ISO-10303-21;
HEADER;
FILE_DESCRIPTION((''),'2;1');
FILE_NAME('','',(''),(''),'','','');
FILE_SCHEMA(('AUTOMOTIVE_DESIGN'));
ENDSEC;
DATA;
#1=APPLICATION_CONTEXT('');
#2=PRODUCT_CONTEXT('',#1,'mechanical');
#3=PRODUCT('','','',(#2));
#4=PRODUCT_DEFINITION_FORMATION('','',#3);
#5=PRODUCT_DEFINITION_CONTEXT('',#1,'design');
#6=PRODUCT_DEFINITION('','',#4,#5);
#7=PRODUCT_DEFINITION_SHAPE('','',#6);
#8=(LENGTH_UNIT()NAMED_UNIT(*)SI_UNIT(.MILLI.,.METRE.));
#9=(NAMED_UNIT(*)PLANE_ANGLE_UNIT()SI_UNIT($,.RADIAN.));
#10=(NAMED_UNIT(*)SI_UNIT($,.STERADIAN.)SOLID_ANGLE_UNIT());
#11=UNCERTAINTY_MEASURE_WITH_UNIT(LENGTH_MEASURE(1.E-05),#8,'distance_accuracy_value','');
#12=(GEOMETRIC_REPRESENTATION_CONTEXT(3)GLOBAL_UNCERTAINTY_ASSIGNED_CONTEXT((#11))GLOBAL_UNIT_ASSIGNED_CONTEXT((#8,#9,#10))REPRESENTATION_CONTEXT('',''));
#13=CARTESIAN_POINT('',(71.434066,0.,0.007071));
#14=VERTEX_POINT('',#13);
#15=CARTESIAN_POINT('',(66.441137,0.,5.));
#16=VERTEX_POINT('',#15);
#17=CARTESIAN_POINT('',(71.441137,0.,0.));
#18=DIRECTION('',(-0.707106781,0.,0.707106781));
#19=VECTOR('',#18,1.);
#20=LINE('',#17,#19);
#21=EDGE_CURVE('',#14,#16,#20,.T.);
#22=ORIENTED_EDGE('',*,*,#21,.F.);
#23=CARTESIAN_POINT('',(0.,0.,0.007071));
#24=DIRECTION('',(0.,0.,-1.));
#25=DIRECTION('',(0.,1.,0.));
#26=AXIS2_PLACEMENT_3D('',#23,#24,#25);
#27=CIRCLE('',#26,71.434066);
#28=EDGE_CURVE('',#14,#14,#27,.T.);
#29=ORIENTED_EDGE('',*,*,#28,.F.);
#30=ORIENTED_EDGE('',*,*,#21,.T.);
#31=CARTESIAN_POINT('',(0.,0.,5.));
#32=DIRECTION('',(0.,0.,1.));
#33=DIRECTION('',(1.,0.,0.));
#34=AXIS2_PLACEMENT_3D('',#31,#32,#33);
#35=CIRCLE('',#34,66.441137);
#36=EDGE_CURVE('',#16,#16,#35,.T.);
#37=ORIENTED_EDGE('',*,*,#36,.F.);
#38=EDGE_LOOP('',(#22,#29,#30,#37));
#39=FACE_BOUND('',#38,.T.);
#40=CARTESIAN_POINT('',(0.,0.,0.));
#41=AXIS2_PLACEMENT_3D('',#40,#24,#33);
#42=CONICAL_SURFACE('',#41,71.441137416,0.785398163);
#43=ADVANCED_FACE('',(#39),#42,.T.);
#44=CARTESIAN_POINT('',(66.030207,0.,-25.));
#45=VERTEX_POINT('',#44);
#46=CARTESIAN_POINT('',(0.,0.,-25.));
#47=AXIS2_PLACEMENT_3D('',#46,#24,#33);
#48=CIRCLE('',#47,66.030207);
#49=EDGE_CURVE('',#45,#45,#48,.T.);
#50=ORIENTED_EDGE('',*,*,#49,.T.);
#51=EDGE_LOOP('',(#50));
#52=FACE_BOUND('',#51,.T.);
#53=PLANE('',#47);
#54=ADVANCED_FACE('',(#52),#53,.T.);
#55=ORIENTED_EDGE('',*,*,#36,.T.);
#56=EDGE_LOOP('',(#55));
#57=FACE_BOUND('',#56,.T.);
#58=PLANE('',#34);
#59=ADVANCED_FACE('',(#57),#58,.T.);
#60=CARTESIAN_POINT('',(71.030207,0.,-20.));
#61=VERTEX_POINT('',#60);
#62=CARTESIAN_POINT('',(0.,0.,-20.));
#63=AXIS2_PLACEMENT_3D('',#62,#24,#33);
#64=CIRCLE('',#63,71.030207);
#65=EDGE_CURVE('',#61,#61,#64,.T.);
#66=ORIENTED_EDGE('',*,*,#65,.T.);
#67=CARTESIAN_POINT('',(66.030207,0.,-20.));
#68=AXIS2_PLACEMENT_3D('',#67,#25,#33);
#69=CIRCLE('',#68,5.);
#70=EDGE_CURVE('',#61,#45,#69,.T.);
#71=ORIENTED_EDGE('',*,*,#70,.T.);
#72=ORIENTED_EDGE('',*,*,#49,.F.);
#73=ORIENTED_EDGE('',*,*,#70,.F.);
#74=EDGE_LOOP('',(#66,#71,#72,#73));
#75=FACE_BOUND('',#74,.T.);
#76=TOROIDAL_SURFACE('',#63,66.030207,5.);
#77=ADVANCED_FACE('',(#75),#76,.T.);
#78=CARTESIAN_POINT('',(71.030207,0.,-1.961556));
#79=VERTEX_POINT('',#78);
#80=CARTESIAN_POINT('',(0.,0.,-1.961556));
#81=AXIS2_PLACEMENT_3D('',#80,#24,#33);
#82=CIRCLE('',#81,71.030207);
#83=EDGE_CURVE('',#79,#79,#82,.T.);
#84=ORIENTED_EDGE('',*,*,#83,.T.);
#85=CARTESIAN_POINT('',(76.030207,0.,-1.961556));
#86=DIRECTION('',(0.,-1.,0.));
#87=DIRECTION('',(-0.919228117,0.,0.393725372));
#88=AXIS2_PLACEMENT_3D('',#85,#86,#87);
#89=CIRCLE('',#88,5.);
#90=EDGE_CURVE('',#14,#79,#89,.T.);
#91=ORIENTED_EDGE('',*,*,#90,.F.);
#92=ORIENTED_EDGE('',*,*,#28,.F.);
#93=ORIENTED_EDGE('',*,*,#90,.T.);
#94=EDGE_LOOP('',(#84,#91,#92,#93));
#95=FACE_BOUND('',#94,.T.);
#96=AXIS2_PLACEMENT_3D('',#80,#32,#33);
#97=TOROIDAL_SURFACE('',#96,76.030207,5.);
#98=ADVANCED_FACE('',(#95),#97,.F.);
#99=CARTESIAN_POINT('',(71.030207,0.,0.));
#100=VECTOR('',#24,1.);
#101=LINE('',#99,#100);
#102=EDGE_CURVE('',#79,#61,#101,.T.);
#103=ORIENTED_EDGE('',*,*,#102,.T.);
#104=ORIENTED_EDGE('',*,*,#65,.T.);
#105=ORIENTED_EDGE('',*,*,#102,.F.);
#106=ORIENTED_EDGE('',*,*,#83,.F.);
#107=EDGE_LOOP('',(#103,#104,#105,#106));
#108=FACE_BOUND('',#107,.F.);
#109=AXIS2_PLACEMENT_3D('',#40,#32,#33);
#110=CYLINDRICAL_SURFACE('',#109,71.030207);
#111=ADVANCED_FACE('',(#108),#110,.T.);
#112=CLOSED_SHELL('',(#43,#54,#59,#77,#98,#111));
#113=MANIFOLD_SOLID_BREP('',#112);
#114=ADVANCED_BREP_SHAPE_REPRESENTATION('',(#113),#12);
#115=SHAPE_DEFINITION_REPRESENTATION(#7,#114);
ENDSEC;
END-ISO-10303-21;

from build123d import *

# Parameters (mm, degrees)
F2_R     = 71.4411374157
F3_DEPTH = 5
F4_R     = 71.0302069346
F6_DEPTH = 25
F7_R     = 0.0241421356


# Not quite as in the source:
# - a fillet or chamfer that OpenCascade refuses, or shapes differently, is made with other operations: its cross-section is extruded or revolved along the edge and cut away or added


with BuildPart() as f3:
    # F2 (on Top) → F3 (new body)
    with BuildSketch(Plane.XY):
        Circle(F2_R)
    extrude(amount=F3_DEPTH)

    # F4 (on face) → F6 (join)
    with BuildSketch(Plane(origin=(0, 0, 0), x_dir=(1, 0, 0), z_dir=(0, 0, -1))):
        Circle(F4_R)
    extrude(amount=F6_DEPTH)

    # F7
    f7_edges = [f3.edges().sort_by_distance(p)[0] for p in [
        (-71.441137, 0, 0),
    ]]
    fillet(f7_edges, radius=F7_R)

    # F8: chamfer of 5 on 1 edges, made by hand

    # F8_s1 → F8_t2 (revolve, cut)
    with BuildSketch(Plane.XZ):
        Polygon((71.4411374157, 0), (66.4411374157, 5), (71.4411374157, 5), align=None)
    revolve(axis=Axis((0, 0, 5), (0, 0, 1)), mode=Mode.SUBTRACT)

    # F9: fillet of radius 5 on 3 edges, made by hand

    # F9_s1 → F9_t2 (revolve, cut)
    with BuildSketch(Plane.XZ):
        with BuildLine():
            ThreePointArc((71.0302069346, -20), (69.5657408405, -23.5355339059), (66.0302069346, -25))
            Line((66.0302069346, -25), (66.0302069346, -25.1))
            Line((66.0302069346, -25.1), (71.1302069346, -25.1))
            Line((71.1302069346, -25.1), (71.1302069346, -20))
            Line((71.1302069346, -20), (71.0302069346, -20))
        make_face()
    revolve(axis=Axis((0, 0, -25), (0, 0, -1)), mode=Mode.SUBTRACT)

    # F9_s3 → F9_t4 (revolve)
    with BuildSketch(Plane.XZ):
        with BuildLine():
            ThreePointArc((71.4340663479, 0.0070710678), (71.1322122973, -0.9567431048), (71.0302069346, -1.9615557905))
            Line((71.0302069346, -1.9615557905), (70.9302069346, -1.9615557905))
            Line((70.9302069346, -1.9615557905), (70.9302069346, 0))
            Line((70.9302069346, 0), (71.0302069346, 0.1))
            ThreePointArc((71.0302069346, 0.1), (71.2321366412, 0.1), (71.3421435362, 0.046443605))
            Line((71.3421435362, 0.046443605), (71.4340663479, 0.0070710678))
        make_face()
    revolve(axis=Axis((0, 0, 0), (0, 0, -1)))


solid = f3.part
